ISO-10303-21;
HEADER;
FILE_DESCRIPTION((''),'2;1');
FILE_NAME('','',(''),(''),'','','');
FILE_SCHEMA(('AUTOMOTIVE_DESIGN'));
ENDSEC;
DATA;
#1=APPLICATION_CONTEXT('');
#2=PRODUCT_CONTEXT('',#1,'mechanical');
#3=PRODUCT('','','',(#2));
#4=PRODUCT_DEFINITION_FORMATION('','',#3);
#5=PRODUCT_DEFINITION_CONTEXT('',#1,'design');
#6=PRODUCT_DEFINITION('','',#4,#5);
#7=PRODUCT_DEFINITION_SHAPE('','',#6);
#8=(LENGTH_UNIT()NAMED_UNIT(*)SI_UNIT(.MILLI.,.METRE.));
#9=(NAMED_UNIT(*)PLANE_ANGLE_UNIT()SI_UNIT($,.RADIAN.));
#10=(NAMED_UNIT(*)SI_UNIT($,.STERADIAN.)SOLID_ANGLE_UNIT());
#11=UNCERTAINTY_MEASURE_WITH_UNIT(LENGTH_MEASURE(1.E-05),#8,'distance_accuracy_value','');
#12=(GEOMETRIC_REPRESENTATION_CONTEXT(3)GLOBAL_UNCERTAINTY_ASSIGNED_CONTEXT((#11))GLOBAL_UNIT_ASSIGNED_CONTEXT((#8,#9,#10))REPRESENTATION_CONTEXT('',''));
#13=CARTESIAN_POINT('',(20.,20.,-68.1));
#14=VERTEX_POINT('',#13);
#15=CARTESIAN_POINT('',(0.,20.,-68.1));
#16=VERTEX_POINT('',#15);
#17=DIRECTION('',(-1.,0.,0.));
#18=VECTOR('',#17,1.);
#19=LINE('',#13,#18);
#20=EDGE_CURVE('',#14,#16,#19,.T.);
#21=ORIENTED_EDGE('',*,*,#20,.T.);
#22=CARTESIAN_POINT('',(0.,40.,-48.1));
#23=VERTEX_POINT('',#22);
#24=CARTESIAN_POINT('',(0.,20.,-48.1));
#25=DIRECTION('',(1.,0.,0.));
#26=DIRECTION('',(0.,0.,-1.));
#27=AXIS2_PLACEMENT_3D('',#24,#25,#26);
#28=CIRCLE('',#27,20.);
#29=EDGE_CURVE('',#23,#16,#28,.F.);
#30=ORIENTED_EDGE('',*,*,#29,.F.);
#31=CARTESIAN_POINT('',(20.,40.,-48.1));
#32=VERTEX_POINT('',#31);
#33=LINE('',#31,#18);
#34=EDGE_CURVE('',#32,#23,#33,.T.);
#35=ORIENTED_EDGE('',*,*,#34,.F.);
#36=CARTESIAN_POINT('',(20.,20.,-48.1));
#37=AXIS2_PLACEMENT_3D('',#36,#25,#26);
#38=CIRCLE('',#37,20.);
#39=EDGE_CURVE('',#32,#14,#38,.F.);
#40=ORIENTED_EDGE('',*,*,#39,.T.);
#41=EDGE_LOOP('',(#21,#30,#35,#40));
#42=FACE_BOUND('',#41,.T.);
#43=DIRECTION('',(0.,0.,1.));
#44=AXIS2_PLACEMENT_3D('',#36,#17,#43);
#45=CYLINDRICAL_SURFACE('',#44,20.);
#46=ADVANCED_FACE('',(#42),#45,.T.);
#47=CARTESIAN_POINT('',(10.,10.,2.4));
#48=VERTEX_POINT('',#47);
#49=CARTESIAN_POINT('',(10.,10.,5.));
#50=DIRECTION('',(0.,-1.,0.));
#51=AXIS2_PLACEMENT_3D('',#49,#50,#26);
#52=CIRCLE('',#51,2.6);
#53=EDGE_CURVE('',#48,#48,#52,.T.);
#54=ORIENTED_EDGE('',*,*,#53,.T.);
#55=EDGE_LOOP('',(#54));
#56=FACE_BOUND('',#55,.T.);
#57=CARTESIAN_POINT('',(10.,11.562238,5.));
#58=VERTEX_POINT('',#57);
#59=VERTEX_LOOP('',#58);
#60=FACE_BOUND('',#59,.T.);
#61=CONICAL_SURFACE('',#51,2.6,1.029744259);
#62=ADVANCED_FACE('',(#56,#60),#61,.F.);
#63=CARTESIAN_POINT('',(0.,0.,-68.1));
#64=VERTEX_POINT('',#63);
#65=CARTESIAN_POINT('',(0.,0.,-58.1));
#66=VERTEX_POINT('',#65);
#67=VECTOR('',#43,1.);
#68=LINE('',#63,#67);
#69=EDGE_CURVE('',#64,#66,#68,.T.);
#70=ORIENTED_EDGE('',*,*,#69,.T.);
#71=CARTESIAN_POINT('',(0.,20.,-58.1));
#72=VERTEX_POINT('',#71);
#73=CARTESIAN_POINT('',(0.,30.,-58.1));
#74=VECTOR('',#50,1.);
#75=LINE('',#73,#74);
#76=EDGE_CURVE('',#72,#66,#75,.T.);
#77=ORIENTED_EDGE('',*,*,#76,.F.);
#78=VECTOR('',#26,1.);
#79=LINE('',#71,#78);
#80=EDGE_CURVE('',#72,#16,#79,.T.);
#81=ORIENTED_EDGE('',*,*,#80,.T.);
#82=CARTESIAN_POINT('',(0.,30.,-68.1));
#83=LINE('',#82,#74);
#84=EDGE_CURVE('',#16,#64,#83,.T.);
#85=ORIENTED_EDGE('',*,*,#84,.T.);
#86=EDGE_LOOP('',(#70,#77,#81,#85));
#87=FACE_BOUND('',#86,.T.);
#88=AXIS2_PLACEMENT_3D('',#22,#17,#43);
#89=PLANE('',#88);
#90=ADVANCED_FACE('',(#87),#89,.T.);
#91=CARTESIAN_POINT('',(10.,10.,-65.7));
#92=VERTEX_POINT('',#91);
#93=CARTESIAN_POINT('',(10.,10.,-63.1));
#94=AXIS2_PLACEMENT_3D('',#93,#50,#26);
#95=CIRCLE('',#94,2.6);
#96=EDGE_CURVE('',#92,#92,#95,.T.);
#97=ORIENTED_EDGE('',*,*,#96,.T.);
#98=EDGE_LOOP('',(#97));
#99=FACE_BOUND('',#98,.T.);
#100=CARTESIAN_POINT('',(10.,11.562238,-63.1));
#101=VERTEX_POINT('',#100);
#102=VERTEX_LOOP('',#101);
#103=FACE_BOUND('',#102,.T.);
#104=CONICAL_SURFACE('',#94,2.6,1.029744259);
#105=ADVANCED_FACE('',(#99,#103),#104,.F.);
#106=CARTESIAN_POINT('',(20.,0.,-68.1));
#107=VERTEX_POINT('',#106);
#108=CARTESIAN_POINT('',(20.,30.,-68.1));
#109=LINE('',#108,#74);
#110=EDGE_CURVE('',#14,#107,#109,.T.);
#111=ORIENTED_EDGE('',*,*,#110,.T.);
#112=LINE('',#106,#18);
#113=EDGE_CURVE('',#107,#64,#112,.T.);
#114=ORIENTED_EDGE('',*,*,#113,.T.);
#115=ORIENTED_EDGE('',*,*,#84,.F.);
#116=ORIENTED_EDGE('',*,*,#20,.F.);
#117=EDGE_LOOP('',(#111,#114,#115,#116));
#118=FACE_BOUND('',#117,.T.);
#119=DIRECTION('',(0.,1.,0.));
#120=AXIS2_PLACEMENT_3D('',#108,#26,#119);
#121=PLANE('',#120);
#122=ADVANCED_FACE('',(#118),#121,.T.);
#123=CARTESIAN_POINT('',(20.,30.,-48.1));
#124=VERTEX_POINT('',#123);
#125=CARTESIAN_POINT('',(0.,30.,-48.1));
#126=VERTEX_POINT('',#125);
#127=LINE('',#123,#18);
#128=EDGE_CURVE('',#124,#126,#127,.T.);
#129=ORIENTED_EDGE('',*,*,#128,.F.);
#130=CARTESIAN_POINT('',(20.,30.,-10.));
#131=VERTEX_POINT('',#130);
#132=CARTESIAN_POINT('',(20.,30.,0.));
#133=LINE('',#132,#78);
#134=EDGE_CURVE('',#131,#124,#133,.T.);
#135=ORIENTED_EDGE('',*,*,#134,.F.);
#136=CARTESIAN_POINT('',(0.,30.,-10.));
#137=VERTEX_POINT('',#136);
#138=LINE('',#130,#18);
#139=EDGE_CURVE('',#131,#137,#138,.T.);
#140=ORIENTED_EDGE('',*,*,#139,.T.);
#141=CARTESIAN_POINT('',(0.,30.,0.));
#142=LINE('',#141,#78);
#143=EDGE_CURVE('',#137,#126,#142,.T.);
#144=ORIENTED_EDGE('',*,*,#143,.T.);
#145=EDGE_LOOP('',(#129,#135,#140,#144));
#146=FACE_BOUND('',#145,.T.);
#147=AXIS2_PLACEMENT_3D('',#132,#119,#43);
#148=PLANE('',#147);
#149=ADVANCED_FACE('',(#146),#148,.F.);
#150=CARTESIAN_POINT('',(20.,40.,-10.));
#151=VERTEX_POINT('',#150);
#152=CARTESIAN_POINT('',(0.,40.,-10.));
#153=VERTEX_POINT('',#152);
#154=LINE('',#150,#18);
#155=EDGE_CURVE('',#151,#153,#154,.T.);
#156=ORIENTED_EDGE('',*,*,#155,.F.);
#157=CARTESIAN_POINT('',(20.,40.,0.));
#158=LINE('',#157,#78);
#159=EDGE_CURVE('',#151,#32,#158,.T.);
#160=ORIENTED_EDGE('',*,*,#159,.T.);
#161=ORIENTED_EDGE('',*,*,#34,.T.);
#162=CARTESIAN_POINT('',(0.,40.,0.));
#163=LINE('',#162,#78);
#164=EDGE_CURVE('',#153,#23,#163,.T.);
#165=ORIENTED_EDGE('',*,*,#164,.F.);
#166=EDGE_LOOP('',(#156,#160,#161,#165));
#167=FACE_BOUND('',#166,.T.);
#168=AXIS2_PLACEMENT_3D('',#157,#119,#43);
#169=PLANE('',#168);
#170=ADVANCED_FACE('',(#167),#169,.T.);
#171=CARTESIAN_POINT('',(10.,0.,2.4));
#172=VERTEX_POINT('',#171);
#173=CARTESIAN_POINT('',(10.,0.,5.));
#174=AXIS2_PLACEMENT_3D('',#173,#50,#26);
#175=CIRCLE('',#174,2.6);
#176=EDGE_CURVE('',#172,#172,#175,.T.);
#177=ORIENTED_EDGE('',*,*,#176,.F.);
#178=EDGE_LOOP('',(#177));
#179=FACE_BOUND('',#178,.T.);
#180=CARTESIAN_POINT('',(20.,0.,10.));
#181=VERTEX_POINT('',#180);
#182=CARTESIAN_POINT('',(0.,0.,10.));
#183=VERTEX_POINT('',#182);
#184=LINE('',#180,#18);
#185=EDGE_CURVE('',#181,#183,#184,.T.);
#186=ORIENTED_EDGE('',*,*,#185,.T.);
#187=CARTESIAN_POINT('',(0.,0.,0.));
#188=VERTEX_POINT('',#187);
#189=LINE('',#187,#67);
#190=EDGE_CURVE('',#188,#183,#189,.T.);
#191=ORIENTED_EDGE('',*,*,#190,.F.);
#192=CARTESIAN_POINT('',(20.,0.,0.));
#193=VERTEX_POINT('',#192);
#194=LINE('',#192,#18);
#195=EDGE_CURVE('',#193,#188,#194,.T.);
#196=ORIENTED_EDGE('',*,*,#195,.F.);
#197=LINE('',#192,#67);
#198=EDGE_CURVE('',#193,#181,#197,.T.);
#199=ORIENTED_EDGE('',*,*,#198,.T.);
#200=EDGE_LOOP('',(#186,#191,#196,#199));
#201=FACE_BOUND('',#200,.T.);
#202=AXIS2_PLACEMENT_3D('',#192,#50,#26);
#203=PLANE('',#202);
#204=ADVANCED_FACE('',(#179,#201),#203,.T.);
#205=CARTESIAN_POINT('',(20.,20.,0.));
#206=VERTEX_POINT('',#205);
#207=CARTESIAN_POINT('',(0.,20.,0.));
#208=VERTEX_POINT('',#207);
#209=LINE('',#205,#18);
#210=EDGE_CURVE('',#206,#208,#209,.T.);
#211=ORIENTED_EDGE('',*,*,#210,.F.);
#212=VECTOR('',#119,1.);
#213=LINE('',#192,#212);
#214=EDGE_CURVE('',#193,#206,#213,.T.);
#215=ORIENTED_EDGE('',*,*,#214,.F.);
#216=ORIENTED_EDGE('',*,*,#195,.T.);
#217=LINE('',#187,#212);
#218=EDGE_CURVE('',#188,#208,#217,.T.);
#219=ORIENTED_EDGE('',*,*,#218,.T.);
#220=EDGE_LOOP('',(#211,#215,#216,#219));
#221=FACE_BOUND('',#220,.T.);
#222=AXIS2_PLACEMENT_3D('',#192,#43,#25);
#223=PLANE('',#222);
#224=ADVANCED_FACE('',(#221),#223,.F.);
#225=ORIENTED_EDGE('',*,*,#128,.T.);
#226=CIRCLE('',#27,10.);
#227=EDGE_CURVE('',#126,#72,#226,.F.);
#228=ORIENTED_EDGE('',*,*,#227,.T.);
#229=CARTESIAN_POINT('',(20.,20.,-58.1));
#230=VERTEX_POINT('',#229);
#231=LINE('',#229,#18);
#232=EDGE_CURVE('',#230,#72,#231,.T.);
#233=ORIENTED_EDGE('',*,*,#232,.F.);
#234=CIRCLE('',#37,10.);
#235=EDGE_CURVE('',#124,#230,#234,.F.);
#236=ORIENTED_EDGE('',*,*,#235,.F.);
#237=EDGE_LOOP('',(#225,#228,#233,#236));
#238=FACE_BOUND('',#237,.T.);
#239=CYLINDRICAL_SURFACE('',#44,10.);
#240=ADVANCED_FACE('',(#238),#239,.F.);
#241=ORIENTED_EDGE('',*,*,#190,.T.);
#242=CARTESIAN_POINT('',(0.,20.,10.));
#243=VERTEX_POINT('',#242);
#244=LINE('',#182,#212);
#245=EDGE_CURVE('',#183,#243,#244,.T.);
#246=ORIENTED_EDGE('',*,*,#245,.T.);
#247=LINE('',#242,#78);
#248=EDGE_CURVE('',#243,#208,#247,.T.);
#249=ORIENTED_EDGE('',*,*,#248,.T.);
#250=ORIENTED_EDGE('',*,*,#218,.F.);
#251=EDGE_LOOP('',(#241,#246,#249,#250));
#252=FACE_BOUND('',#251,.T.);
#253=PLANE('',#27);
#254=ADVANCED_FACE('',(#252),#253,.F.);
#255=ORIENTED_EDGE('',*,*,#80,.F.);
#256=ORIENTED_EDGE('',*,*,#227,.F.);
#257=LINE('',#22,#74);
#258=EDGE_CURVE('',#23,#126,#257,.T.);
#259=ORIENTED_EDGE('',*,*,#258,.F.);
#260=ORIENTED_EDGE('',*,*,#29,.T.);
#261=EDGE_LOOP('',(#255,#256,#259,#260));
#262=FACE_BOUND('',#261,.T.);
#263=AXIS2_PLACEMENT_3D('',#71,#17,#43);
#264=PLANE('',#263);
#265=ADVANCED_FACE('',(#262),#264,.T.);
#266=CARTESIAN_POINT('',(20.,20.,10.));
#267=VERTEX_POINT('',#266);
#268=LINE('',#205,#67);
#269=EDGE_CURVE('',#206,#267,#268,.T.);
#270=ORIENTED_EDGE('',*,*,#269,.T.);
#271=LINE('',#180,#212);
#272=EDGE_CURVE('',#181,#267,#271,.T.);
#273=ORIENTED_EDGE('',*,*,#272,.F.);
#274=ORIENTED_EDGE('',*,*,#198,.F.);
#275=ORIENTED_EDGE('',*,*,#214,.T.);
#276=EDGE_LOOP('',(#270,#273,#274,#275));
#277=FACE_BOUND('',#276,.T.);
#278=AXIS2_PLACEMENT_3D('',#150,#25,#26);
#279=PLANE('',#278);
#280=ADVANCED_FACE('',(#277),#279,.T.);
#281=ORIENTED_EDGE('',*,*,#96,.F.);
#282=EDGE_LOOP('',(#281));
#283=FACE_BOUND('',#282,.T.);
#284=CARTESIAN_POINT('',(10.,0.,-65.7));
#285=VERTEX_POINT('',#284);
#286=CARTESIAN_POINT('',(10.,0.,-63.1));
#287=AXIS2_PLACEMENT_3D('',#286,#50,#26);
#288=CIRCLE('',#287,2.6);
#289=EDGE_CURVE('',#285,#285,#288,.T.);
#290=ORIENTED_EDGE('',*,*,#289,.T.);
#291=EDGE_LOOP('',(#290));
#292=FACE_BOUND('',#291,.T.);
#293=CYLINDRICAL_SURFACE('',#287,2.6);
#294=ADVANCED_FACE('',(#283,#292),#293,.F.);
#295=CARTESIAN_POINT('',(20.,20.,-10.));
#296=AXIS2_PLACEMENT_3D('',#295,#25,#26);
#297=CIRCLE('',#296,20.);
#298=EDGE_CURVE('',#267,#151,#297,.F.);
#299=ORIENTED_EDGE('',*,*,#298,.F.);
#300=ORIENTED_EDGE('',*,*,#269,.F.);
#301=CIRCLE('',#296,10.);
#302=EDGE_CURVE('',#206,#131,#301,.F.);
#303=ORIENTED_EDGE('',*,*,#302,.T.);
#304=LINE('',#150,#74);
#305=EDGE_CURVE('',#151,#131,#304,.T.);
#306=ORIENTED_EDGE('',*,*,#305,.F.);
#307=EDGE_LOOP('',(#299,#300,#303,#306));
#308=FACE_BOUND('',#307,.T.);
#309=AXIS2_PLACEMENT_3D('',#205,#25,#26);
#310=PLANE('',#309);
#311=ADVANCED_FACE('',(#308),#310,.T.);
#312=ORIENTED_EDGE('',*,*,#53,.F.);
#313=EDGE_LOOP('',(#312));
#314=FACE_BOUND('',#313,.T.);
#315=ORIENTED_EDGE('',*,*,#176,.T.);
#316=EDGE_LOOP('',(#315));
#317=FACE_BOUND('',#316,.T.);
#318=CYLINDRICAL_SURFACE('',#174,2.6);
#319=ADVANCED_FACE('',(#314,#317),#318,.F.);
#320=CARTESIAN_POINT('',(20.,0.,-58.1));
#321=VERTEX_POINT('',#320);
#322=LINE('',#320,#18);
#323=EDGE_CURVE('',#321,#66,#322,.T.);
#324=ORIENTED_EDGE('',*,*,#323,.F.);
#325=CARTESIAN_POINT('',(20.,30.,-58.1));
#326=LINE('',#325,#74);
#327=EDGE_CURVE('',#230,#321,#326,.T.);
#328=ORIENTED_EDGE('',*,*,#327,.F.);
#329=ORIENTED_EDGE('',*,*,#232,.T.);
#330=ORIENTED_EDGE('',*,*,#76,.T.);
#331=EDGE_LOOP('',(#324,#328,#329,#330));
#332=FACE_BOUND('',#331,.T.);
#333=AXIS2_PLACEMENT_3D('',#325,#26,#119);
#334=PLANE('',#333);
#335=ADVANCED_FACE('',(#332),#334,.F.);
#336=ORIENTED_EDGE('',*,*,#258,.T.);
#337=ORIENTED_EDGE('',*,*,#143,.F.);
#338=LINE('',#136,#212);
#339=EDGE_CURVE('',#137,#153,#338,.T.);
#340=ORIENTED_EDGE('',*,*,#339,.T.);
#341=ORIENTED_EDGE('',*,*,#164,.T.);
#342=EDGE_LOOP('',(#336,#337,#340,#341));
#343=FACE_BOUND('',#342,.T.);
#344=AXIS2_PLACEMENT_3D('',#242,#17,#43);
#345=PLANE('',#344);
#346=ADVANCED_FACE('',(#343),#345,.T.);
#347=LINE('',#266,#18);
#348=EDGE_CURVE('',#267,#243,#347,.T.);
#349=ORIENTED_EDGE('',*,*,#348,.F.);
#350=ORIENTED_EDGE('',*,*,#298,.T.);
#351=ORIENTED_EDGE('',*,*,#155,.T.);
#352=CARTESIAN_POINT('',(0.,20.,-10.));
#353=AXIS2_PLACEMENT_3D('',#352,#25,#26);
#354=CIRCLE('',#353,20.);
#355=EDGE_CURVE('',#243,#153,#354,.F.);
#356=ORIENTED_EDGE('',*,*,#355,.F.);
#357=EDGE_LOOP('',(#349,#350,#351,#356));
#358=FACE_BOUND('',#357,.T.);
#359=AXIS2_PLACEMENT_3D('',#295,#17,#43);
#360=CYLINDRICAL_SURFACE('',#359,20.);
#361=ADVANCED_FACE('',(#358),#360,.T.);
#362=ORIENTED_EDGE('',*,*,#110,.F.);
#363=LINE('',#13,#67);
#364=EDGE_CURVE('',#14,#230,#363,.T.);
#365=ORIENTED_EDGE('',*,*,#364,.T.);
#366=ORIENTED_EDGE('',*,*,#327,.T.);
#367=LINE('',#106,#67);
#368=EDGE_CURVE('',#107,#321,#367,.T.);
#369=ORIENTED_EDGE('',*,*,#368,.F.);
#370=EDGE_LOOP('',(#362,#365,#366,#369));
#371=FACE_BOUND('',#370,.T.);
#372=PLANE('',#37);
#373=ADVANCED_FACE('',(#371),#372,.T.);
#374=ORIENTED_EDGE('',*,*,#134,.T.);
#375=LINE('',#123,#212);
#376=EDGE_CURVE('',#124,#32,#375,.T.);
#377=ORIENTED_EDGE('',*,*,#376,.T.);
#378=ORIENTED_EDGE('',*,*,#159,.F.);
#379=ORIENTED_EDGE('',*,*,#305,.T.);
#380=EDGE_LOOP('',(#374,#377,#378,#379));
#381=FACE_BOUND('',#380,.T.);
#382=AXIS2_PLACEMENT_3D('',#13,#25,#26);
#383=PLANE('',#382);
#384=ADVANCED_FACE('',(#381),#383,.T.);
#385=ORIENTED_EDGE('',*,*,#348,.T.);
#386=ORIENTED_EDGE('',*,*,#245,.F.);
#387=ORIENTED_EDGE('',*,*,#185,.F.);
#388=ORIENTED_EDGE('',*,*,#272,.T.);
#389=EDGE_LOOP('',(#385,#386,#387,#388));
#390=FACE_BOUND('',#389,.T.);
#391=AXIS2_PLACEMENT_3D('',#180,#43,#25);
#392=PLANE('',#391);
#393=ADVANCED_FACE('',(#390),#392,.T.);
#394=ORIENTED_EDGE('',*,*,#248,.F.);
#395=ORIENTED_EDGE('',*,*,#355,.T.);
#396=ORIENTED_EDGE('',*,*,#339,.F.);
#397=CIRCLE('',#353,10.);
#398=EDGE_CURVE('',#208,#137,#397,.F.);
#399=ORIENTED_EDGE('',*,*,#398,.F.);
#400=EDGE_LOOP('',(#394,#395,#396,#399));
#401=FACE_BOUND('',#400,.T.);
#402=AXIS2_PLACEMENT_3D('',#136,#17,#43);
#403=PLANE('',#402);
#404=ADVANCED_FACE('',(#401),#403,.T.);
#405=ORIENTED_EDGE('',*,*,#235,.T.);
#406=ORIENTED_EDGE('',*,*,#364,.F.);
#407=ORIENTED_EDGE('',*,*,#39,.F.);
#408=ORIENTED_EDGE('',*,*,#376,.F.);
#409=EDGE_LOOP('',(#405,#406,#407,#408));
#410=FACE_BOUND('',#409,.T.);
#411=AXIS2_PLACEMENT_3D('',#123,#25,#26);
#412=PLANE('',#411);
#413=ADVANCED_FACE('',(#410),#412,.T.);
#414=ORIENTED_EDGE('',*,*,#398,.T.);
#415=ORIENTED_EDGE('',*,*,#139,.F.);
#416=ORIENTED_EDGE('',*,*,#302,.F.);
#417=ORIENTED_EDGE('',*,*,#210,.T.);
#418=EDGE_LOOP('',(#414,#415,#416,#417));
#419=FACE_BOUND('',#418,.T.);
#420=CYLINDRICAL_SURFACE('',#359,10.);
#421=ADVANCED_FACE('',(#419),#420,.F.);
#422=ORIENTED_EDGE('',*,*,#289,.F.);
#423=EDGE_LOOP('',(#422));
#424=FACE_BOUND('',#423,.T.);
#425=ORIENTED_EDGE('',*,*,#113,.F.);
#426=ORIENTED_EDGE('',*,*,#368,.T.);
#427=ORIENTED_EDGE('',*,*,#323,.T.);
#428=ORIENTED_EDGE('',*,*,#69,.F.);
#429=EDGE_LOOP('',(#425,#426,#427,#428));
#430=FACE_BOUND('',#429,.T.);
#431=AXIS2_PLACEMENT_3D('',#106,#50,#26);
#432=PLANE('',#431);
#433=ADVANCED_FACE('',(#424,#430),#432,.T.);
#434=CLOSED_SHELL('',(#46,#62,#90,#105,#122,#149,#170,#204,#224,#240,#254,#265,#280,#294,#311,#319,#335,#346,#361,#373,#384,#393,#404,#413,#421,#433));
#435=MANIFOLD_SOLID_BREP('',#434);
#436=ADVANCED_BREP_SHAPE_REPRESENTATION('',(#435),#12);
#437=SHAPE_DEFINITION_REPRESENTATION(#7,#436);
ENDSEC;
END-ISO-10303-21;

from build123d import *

# Parameters (mm, degrees)
SM_BASE_FLANGE_1_DEPTH = 20
HOLE_WIZARD_M51_D      = 5.2
HOLE_WIZARD_M51_DEPTH  = 10
HOLE_WIZARD_M51_TIP    = 1.562237609


# Sheet-metal steps are written as plain solids
with BuildPart() as part:
    # Sketch 1 → Базовая кромка1 (new body)
    with BuildSketch(Plane(origin=(0, 0, 0), x_dir=(0, 0, -1), z_dir=(1, 0, 0))):
        with BuildLine():
            Line((0, 0), (0, 20))
            ThreePointArc((0, 20), (2.928932188, 27.071067812), (10, 30))
            Line((10, 30), (48.1, 30))
            ThreePointArc((48.1, 30), (55.171067812, 27.071067812), (58.1, 20))
            Line((58.1, 20), (58.1, 0))
            Line((58.1, 0), (68.1, 0))
            Line((68.1, 0), (68.1, 20))
            ThreePointArc((68.1, 20), (62.242135624, 34.142135624), (48.1, 40))
            Line((48.1, 40), (10, 40))
            ThreePointArc((10, 40), (-4.142135624, 34.142135624), (-10, 20))
            Line((-10, 20), (-10, 0))
            Line((-10, 0), (0, 0))
        make_face()
    extrude(amount=SM_BASE_FLANGE_1_DEPTH)

    # Сверло под метчик  спиральное M51
    with Locations(Plane(origin=(0, 0, 0), x_dir=(-1, 0, 0), z_dir=(0, -1, 0))):
        with Locations((-10, 63.1), (-10, -5)):
            Hole(HOLE_WIZARD_M51_D / 2, depth=HOLE_WIZARD_M51_DEPTH)
            with Locations((0, 0, -(HOLE_WIZARD_M51_DEPTH + HOLE_WIZARD_M51_TIP / 2))):  # 118° drill point
                Cone(0, HOLE_WIZARD_M51_D / 2, HOLE_WIZARD_M51_TIP, mode=Mode.SUBTRACT)


solid = part.part
